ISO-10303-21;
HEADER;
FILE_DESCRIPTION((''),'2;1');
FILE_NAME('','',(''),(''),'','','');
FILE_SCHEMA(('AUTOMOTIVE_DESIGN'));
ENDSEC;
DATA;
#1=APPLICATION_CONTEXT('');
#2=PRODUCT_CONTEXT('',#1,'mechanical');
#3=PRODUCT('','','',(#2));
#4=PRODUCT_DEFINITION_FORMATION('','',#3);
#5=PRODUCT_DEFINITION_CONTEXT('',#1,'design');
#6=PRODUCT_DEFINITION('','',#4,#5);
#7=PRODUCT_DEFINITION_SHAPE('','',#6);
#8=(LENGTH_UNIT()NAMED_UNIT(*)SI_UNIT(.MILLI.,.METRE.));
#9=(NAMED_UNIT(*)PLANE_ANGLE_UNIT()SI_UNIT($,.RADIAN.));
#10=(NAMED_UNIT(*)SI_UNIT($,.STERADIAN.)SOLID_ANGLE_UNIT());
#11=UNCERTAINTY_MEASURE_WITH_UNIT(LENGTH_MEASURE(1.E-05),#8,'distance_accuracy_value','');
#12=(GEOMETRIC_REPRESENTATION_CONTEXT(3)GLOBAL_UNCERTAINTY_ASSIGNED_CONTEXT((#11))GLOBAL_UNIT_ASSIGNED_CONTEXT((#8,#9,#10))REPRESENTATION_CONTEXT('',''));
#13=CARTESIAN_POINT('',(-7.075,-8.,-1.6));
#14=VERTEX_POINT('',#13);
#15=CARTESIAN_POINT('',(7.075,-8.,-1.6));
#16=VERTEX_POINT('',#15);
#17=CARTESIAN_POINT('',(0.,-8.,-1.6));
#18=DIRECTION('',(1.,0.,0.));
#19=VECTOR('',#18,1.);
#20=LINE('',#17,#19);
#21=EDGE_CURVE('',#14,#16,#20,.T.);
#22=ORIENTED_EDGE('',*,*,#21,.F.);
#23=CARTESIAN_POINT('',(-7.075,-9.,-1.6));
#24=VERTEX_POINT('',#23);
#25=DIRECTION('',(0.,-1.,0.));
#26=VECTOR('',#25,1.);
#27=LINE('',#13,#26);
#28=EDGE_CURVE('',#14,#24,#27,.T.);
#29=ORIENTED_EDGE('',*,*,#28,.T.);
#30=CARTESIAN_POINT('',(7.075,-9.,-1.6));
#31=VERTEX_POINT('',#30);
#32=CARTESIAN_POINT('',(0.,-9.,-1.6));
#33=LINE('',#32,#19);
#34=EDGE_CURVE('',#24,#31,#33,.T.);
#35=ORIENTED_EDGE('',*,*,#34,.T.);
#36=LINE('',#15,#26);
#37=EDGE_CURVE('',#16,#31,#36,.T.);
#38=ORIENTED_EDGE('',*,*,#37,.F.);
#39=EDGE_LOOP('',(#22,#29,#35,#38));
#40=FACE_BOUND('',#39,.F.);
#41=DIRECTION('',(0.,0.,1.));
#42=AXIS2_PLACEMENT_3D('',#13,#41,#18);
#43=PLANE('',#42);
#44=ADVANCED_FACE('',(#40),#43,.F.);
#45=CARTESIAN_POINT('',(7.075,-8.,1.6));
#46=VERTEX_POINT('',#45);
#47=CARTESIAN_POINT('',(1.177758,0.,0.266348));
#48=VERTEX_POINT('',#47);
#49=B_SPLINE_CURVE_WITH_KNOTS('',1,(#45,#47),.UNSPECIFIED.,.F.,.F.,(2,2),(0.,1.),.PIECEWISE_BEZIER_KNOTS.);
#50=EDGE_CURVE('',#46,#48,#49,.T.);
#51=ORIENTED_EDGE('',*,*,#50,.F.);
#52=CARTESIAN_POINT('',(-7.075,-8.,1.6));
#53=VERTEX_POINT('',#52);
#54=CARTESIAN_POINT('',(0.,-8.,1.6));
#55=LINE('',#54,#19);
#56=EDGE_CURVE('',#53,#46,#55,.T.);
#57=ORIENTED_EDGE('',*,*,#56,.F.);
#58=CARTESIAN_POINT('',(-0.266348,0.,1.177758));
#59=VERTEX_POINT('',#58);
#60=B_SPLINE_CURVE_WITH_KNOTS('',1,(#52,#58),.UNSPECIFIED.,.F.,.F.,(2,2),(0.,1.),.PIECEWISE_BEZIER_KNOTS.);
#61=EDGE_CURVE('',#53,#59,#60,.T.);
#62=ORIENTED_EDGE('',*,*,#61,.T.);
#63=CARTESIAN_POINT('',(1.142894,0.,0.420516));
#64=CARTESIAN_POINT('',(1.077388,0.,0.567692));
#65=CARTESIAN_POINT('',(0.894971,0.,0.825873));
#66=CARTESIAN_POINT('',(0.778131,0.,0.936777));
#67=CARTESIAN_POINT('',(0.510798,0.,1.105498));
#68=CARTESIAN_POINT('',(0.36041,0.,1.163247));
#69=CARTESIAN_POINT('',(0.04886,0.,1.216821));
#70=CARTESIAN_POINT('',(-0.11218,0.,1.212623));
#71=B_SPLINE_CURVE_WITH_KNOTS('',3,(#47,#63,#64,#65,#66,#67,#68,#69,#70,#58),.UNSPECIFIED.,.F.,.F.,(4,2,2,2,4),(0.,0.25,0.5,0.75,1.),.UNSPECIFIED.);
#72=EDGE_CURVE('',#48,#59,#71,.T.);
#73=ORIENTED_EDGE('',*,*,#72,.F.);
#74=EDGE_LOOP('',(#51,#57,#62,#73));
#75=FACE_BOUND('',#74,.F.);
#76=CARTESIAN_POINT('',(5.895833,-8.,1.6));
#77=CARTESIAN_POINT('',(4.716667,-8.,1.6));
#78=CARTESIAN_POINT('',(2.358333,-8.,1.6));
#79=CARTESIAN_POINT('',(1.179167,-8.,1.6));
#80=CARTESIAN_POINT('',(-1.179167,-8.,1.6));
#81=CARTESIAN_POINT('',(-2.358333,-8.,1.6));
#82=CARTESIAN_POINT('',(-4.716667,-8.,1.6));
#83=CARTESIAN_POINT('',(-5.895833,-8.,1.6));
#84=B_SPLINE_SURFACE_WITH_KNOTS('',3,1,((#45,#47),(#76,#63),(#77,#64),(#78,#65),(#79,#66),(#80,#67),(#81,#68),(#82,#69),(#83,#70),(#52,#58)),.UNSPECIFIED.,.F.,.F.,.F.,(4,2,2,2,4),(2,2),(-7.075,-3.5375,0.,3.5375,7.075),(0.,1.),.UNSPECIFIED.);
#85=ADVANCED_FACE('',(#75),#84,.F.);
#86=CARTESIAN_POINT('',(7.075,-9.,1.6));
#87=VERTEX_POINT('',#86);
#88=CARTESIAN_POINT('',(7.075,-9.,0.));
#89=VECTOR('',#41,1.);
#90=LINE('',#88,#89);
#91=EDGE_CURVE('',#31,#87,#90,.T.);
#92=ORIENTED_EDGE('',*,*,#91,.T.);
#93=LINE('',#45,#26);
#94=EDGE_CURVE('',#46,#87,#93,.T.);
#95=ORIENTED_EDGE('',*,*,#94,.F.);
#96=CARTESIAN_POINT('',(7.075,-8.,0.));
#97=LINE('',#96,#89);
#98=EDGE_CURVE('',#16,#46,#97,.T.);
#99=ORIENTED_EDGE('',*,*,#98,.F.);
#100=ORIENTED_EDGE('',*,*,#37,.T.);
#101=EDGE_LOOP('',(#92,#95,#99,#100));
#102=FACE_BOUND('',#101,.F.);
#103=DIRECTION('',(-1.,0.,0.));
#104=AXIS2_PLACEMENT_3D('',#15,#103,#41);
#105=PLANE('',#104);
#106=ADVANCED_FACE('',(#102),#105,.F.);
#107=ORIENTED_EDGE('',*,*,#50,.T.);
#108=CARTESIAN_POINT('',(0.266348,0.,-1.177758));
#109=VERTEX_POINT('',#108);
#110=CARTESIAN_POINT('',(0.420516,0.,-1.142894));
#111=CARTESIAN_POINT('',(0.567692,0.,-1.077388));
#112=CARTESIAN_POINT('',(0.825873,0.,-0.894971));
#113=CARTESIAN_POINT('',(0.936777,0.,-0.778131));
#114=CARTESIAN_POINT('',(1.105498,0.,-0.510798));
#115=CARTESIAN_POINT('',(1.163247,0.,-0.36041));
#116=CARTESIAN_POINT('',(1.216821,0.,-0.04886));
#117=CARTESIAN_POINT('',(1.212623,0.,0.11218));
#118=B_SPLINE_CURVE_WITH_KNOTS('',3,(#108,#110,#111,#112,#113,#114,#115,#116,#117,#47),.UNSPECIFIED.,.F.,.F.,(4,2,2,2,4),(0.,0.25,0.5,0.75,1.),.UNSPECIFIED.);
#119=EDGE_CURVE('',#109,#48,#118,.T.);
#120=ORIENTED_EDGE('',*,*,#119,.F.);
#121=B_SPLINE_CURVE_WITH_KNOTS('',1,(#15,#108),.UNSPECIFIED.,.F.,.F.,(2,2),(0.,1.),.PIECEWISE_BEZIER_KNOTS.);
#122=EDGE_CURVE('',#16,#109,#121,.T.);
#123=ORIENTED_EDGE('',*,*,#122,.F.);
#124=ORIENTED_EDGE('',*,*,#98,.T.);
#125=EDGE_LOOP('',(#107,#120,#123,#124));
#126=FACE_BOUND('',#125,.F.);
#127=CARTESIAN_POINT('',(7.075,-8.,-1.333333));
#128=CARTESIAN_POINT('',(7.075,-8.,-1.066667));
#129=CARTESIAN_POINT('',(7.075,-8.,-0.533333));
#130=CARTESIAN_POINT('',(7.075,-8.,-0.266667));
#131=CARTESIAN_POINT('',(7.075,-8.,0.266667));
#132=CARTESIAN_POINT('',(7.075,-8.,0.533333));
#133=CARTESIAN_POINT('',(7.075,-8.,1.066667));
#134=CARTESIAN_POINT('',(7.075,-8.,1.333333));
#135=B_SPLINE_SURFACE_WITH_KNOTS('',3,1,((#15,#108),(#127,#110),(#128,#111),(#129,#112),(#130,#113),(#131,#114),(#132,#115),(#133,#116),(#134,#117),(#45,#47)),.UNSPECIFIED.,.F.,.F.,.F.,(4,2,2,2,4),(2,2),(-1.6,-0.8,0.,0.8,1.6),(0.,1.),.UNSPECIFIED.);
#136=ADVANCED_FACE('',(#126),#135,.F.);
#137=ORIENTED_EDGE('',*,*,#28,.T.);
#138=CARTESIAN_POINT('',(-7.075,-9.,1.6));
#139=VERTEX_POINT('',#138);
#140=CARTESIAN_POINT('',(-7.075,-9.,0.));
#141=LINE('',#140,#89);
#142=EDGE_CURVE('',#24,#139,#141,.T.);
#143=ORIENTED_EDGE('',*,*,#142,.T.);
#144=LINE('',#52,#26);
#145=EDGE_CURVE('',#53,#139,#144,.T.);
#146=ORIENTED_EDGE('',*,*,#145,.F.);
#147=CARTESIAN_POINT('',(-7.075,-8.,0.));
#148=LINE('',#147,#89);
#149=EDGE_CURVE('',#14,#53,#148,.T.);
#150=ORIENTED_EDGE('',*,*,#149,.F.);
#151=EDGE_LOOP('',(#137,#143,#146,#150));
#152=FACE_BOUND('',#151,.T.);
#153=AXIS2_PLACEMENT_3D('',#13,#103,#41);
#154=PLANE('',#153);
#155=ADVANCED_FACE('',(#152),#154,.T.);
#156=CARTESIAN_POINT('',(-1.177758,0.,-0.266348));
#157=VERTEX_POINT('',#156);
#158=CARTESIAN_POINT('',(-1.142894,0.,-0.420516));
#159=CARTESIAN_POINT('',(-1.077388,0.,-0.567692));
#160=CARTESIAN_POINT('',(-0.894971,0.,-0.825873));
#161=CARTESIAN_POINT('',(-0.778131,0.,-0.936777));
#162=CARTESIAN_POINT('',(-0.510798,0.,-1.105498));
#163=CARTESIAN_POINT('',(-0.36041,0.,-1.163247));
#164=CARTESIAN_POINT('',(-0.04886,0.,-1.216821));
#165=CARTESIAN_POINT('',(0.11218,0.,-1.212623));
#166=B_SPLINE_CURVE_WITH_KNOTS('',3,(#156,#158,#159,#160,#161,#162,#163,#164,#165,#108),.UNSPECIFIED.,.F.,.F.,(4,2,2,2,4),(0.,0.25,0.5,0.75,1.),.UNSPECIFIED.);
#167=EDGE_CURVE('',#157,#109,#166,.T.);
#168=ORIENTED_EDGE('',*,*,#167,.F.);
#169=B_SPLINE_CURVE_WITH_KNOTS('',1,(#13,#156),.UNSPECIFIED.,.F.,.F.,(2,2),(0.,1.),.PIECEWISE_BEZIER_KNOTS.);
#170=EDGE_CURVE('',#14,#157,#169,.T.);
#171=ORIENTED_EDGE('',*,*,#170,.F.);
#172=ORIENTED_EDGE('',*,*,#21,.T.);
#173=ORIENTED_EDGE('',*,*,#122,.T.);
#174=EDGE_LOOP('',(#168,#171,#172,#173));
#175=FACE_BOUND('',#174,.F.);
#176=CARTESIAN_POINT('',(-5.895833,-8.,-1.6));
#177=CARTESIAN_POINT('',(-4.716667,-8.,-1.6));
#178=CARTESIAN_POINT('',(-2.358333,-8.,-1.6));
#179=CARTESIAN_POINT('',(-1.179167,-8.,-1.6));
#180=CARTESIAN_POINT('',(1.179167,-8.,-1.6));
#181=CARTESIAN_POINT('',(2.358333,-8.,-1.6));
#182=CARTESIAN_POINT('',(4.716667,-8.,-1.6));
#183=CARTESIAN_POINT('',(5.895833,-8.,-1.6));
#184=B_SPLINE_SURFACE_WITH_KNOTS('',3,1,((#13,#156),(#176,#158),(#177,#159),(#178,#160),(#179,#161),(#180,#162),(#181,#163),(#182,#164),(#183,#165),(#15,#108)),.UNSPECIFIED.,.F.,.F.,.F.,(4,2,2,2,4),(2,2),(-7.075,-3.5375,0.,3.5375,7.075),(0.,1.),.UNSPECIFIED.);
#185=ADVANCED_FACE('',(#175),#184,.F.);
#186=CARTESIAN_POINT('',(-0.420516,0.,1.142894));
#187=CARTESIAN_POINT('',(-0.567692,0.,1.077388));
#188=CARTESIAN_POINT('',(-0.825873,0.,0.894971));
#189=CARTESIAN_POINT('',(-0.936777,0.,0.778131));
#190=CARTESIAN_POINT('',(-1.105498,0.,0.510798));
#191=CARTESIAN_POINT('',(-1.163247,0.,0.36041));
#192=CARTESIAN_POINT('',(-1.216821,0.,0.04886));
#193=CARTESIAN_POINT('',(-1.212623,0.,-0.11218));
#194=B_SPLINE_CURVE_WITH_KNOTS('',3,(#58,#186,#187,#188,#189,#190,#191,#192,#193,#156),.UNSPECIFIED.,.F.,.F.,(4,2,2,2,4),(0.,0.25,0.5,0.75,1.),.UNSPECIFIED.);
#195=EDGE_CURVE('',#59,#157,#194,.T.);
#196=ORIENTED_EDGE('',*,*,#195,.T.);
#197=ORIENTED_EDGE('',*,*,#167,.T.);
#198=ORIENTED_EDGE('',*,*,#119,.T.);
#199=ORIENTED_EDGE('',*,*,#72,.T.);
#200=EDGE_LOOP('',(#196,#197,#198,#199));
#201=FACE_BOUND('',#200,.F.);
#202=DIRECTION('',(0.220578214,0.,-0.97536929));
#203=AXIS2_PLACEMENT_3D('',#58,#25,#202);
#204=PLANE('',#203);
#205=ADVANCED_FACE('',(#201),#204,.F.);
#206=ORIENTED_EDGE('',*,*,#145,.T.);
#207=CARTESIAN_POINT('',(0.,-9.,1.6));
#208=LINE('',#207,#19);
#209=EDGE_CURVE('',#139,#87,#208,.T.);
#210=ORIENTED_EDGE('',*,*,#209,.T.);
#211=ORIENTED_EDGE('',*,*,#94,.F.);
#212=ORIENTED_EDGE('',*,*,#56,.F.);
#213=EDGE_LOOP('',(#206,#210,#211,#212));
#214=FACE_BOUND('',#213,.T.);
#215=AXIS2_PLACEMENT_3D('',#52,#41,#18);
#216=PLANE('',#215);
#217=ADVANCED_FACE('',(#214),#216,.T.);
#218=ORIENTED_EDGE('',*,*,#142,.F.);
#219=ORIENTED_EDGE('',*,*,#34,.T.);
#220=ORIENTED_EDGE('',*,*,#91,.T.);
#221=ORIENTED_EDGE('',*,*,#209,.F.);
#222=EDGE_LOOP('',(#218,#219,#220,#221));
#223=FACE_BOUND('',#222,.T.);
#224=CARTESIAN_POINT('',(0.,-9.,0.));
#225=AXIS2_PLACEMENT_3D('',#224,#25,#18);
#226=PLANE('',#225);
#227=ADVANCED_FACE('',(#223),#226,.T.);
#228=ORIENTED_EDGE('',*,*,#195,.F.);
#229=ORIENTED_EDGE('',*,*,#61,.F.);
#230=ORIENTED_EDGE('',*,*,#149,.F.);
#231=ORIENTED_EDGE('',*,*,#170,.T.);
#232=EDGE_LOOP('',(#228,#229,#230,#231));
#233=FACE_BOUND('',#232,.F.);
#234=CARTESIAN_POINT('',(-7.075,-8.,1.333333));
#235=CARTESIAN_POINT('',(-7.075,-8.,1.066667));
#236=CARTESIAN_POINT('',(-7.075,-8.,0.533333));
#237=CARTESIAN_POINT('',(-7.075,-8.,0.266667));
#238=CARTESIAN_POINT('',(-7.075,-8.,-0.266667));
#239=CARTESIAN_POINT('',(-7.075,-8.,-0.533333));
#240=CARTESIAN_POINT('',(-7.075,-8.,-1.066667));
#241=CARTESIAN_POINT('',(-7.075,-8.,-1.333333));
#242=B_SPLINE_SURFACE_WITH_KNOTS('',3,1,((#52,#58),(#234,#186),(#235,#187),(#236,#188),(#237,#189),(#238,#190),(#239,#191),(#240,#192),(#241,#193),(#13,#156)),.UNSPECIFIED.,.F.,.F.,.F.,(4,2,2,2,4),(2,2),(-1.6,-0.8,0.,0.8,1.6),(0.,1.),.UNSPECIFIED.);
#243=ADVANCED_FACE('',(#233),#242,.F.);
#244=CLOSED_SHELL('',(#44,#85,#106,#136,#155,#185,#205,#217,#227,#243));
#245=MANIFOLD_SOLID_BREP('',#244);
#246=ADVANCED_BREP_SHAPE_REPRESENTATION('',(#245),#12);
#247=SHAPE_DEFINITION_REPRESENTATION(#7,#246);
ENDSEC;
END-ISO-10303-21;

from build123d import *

# Parameters (mm, degrees)
F2_W     = 14.15
F2_H     = 3.2
F4_W     = 14.15
F4_H     = 3.2
F5_DEPTH = 1


# Not quite as in the source:
# - the arcs of a loft's sections are written as splines that run evenly, so that the points pair up as in the source's solid


with BuildPart() as f3:
    # F2 (on offset) → F3 section 0
    with BuildSketch(Plane.XZ.offset(8)):
        Rectangle(F2_W, F2_H)
    # F0 (on Front) → F3 section 1
    with BuildSketch(Plane.XZ):
        with BuildLine():
            add(Edge.make_bspline(
                [(1.1777584175, 0.2663481933), (1.1428935205, 0.4205164097), (1.0773884422, 0.5676916369), (0.8949712684, 0.8258729192), (0.7781309462, 0.9367773911), (0.5107977536, 1.1054977634), (0.3604100674, 1.1632472795), (0.0488599113, 1.2168205944), (-0.112179977, 1.2126233144), (-0.2663481933, 1.1777584175)],
                knots=[0, 0, 0, 0, 0.25, 0.25, 0.5, 0.5, 0.75, 0.75, 1, 1, 1, 1], degree=3))
            add(Edge.make_bspline(
                [(-0.2663481933, 1.1777584175), (-0.4205164097, 1.1428935205), (-0.5676916369, 1.0773884422), (-0.8258729192, 0.8949712684), (-0.9367773911, 0.7781309462), (-1.1054977634, 0.5107977536), (-1.1632472795, 0.3604100674), (-1.2168205944, 0.0488599113), (-1.2126233144, -0.112179977), (-1.1777584175, -0.2663481933)],
                knots=[0, 0, 0, 0, 0.25, 0.25, 0.5, 0.5, 0.75, 0.75, 1, 1, 1, 1], degree=3))
            add(Edge.make_bspline(
                [(-1.1777584175, -0.2663481933), (-1.1428935205, -0.4205164097), (-1.0773884422, -0.5676916369), (-0.8949712684, -0.8258729192), (-0.7781309462, -0.9367773911), (-0.5107977536, -1.1054977634), (-0.3604100674, -1.1632472795), (-0.0488599113, -1.2168205944), (0.112179977, -1.2126233144), (0.2663481933, -1.1777584175)],
                knots=[0, 0, 0, 0, 0.25, 0.25, 0.5, 0.5, 0.75, 0.75, 1, 1, 1, 1], degree=3))
            add(Edge.make_bspline(
                [(0.2663481933, -1.1777584175), (0.4205164097, -1.1428935205), (0.5676916369, -1.0773884422), (0.8258729192, -0.8949712684), (0.9367773911, -0.7781309462), (1.1054977634, -0.5107977536), (1.1632472795, -0.3604100674), (1.2168205944, -0.0488599113), (1.2126233144, 0.112179977), (1.1777584175, 0.2663481933)],
                knots=[0, 0, 0, 0, 0.25, 0.25, 0.5, 0.5, 0.75, 0.75, 1, 1, 1, 1], degree=3))
        make_face()
    loft(ruled=True)

    # F4 (on face) → F5 (join)
    with BuildSketch(Plane.XZ.offset(8)):
        Rectangle(F4_W, F4_H)
    extrude(amount=F5_DEPTH)


solid = f3.part
